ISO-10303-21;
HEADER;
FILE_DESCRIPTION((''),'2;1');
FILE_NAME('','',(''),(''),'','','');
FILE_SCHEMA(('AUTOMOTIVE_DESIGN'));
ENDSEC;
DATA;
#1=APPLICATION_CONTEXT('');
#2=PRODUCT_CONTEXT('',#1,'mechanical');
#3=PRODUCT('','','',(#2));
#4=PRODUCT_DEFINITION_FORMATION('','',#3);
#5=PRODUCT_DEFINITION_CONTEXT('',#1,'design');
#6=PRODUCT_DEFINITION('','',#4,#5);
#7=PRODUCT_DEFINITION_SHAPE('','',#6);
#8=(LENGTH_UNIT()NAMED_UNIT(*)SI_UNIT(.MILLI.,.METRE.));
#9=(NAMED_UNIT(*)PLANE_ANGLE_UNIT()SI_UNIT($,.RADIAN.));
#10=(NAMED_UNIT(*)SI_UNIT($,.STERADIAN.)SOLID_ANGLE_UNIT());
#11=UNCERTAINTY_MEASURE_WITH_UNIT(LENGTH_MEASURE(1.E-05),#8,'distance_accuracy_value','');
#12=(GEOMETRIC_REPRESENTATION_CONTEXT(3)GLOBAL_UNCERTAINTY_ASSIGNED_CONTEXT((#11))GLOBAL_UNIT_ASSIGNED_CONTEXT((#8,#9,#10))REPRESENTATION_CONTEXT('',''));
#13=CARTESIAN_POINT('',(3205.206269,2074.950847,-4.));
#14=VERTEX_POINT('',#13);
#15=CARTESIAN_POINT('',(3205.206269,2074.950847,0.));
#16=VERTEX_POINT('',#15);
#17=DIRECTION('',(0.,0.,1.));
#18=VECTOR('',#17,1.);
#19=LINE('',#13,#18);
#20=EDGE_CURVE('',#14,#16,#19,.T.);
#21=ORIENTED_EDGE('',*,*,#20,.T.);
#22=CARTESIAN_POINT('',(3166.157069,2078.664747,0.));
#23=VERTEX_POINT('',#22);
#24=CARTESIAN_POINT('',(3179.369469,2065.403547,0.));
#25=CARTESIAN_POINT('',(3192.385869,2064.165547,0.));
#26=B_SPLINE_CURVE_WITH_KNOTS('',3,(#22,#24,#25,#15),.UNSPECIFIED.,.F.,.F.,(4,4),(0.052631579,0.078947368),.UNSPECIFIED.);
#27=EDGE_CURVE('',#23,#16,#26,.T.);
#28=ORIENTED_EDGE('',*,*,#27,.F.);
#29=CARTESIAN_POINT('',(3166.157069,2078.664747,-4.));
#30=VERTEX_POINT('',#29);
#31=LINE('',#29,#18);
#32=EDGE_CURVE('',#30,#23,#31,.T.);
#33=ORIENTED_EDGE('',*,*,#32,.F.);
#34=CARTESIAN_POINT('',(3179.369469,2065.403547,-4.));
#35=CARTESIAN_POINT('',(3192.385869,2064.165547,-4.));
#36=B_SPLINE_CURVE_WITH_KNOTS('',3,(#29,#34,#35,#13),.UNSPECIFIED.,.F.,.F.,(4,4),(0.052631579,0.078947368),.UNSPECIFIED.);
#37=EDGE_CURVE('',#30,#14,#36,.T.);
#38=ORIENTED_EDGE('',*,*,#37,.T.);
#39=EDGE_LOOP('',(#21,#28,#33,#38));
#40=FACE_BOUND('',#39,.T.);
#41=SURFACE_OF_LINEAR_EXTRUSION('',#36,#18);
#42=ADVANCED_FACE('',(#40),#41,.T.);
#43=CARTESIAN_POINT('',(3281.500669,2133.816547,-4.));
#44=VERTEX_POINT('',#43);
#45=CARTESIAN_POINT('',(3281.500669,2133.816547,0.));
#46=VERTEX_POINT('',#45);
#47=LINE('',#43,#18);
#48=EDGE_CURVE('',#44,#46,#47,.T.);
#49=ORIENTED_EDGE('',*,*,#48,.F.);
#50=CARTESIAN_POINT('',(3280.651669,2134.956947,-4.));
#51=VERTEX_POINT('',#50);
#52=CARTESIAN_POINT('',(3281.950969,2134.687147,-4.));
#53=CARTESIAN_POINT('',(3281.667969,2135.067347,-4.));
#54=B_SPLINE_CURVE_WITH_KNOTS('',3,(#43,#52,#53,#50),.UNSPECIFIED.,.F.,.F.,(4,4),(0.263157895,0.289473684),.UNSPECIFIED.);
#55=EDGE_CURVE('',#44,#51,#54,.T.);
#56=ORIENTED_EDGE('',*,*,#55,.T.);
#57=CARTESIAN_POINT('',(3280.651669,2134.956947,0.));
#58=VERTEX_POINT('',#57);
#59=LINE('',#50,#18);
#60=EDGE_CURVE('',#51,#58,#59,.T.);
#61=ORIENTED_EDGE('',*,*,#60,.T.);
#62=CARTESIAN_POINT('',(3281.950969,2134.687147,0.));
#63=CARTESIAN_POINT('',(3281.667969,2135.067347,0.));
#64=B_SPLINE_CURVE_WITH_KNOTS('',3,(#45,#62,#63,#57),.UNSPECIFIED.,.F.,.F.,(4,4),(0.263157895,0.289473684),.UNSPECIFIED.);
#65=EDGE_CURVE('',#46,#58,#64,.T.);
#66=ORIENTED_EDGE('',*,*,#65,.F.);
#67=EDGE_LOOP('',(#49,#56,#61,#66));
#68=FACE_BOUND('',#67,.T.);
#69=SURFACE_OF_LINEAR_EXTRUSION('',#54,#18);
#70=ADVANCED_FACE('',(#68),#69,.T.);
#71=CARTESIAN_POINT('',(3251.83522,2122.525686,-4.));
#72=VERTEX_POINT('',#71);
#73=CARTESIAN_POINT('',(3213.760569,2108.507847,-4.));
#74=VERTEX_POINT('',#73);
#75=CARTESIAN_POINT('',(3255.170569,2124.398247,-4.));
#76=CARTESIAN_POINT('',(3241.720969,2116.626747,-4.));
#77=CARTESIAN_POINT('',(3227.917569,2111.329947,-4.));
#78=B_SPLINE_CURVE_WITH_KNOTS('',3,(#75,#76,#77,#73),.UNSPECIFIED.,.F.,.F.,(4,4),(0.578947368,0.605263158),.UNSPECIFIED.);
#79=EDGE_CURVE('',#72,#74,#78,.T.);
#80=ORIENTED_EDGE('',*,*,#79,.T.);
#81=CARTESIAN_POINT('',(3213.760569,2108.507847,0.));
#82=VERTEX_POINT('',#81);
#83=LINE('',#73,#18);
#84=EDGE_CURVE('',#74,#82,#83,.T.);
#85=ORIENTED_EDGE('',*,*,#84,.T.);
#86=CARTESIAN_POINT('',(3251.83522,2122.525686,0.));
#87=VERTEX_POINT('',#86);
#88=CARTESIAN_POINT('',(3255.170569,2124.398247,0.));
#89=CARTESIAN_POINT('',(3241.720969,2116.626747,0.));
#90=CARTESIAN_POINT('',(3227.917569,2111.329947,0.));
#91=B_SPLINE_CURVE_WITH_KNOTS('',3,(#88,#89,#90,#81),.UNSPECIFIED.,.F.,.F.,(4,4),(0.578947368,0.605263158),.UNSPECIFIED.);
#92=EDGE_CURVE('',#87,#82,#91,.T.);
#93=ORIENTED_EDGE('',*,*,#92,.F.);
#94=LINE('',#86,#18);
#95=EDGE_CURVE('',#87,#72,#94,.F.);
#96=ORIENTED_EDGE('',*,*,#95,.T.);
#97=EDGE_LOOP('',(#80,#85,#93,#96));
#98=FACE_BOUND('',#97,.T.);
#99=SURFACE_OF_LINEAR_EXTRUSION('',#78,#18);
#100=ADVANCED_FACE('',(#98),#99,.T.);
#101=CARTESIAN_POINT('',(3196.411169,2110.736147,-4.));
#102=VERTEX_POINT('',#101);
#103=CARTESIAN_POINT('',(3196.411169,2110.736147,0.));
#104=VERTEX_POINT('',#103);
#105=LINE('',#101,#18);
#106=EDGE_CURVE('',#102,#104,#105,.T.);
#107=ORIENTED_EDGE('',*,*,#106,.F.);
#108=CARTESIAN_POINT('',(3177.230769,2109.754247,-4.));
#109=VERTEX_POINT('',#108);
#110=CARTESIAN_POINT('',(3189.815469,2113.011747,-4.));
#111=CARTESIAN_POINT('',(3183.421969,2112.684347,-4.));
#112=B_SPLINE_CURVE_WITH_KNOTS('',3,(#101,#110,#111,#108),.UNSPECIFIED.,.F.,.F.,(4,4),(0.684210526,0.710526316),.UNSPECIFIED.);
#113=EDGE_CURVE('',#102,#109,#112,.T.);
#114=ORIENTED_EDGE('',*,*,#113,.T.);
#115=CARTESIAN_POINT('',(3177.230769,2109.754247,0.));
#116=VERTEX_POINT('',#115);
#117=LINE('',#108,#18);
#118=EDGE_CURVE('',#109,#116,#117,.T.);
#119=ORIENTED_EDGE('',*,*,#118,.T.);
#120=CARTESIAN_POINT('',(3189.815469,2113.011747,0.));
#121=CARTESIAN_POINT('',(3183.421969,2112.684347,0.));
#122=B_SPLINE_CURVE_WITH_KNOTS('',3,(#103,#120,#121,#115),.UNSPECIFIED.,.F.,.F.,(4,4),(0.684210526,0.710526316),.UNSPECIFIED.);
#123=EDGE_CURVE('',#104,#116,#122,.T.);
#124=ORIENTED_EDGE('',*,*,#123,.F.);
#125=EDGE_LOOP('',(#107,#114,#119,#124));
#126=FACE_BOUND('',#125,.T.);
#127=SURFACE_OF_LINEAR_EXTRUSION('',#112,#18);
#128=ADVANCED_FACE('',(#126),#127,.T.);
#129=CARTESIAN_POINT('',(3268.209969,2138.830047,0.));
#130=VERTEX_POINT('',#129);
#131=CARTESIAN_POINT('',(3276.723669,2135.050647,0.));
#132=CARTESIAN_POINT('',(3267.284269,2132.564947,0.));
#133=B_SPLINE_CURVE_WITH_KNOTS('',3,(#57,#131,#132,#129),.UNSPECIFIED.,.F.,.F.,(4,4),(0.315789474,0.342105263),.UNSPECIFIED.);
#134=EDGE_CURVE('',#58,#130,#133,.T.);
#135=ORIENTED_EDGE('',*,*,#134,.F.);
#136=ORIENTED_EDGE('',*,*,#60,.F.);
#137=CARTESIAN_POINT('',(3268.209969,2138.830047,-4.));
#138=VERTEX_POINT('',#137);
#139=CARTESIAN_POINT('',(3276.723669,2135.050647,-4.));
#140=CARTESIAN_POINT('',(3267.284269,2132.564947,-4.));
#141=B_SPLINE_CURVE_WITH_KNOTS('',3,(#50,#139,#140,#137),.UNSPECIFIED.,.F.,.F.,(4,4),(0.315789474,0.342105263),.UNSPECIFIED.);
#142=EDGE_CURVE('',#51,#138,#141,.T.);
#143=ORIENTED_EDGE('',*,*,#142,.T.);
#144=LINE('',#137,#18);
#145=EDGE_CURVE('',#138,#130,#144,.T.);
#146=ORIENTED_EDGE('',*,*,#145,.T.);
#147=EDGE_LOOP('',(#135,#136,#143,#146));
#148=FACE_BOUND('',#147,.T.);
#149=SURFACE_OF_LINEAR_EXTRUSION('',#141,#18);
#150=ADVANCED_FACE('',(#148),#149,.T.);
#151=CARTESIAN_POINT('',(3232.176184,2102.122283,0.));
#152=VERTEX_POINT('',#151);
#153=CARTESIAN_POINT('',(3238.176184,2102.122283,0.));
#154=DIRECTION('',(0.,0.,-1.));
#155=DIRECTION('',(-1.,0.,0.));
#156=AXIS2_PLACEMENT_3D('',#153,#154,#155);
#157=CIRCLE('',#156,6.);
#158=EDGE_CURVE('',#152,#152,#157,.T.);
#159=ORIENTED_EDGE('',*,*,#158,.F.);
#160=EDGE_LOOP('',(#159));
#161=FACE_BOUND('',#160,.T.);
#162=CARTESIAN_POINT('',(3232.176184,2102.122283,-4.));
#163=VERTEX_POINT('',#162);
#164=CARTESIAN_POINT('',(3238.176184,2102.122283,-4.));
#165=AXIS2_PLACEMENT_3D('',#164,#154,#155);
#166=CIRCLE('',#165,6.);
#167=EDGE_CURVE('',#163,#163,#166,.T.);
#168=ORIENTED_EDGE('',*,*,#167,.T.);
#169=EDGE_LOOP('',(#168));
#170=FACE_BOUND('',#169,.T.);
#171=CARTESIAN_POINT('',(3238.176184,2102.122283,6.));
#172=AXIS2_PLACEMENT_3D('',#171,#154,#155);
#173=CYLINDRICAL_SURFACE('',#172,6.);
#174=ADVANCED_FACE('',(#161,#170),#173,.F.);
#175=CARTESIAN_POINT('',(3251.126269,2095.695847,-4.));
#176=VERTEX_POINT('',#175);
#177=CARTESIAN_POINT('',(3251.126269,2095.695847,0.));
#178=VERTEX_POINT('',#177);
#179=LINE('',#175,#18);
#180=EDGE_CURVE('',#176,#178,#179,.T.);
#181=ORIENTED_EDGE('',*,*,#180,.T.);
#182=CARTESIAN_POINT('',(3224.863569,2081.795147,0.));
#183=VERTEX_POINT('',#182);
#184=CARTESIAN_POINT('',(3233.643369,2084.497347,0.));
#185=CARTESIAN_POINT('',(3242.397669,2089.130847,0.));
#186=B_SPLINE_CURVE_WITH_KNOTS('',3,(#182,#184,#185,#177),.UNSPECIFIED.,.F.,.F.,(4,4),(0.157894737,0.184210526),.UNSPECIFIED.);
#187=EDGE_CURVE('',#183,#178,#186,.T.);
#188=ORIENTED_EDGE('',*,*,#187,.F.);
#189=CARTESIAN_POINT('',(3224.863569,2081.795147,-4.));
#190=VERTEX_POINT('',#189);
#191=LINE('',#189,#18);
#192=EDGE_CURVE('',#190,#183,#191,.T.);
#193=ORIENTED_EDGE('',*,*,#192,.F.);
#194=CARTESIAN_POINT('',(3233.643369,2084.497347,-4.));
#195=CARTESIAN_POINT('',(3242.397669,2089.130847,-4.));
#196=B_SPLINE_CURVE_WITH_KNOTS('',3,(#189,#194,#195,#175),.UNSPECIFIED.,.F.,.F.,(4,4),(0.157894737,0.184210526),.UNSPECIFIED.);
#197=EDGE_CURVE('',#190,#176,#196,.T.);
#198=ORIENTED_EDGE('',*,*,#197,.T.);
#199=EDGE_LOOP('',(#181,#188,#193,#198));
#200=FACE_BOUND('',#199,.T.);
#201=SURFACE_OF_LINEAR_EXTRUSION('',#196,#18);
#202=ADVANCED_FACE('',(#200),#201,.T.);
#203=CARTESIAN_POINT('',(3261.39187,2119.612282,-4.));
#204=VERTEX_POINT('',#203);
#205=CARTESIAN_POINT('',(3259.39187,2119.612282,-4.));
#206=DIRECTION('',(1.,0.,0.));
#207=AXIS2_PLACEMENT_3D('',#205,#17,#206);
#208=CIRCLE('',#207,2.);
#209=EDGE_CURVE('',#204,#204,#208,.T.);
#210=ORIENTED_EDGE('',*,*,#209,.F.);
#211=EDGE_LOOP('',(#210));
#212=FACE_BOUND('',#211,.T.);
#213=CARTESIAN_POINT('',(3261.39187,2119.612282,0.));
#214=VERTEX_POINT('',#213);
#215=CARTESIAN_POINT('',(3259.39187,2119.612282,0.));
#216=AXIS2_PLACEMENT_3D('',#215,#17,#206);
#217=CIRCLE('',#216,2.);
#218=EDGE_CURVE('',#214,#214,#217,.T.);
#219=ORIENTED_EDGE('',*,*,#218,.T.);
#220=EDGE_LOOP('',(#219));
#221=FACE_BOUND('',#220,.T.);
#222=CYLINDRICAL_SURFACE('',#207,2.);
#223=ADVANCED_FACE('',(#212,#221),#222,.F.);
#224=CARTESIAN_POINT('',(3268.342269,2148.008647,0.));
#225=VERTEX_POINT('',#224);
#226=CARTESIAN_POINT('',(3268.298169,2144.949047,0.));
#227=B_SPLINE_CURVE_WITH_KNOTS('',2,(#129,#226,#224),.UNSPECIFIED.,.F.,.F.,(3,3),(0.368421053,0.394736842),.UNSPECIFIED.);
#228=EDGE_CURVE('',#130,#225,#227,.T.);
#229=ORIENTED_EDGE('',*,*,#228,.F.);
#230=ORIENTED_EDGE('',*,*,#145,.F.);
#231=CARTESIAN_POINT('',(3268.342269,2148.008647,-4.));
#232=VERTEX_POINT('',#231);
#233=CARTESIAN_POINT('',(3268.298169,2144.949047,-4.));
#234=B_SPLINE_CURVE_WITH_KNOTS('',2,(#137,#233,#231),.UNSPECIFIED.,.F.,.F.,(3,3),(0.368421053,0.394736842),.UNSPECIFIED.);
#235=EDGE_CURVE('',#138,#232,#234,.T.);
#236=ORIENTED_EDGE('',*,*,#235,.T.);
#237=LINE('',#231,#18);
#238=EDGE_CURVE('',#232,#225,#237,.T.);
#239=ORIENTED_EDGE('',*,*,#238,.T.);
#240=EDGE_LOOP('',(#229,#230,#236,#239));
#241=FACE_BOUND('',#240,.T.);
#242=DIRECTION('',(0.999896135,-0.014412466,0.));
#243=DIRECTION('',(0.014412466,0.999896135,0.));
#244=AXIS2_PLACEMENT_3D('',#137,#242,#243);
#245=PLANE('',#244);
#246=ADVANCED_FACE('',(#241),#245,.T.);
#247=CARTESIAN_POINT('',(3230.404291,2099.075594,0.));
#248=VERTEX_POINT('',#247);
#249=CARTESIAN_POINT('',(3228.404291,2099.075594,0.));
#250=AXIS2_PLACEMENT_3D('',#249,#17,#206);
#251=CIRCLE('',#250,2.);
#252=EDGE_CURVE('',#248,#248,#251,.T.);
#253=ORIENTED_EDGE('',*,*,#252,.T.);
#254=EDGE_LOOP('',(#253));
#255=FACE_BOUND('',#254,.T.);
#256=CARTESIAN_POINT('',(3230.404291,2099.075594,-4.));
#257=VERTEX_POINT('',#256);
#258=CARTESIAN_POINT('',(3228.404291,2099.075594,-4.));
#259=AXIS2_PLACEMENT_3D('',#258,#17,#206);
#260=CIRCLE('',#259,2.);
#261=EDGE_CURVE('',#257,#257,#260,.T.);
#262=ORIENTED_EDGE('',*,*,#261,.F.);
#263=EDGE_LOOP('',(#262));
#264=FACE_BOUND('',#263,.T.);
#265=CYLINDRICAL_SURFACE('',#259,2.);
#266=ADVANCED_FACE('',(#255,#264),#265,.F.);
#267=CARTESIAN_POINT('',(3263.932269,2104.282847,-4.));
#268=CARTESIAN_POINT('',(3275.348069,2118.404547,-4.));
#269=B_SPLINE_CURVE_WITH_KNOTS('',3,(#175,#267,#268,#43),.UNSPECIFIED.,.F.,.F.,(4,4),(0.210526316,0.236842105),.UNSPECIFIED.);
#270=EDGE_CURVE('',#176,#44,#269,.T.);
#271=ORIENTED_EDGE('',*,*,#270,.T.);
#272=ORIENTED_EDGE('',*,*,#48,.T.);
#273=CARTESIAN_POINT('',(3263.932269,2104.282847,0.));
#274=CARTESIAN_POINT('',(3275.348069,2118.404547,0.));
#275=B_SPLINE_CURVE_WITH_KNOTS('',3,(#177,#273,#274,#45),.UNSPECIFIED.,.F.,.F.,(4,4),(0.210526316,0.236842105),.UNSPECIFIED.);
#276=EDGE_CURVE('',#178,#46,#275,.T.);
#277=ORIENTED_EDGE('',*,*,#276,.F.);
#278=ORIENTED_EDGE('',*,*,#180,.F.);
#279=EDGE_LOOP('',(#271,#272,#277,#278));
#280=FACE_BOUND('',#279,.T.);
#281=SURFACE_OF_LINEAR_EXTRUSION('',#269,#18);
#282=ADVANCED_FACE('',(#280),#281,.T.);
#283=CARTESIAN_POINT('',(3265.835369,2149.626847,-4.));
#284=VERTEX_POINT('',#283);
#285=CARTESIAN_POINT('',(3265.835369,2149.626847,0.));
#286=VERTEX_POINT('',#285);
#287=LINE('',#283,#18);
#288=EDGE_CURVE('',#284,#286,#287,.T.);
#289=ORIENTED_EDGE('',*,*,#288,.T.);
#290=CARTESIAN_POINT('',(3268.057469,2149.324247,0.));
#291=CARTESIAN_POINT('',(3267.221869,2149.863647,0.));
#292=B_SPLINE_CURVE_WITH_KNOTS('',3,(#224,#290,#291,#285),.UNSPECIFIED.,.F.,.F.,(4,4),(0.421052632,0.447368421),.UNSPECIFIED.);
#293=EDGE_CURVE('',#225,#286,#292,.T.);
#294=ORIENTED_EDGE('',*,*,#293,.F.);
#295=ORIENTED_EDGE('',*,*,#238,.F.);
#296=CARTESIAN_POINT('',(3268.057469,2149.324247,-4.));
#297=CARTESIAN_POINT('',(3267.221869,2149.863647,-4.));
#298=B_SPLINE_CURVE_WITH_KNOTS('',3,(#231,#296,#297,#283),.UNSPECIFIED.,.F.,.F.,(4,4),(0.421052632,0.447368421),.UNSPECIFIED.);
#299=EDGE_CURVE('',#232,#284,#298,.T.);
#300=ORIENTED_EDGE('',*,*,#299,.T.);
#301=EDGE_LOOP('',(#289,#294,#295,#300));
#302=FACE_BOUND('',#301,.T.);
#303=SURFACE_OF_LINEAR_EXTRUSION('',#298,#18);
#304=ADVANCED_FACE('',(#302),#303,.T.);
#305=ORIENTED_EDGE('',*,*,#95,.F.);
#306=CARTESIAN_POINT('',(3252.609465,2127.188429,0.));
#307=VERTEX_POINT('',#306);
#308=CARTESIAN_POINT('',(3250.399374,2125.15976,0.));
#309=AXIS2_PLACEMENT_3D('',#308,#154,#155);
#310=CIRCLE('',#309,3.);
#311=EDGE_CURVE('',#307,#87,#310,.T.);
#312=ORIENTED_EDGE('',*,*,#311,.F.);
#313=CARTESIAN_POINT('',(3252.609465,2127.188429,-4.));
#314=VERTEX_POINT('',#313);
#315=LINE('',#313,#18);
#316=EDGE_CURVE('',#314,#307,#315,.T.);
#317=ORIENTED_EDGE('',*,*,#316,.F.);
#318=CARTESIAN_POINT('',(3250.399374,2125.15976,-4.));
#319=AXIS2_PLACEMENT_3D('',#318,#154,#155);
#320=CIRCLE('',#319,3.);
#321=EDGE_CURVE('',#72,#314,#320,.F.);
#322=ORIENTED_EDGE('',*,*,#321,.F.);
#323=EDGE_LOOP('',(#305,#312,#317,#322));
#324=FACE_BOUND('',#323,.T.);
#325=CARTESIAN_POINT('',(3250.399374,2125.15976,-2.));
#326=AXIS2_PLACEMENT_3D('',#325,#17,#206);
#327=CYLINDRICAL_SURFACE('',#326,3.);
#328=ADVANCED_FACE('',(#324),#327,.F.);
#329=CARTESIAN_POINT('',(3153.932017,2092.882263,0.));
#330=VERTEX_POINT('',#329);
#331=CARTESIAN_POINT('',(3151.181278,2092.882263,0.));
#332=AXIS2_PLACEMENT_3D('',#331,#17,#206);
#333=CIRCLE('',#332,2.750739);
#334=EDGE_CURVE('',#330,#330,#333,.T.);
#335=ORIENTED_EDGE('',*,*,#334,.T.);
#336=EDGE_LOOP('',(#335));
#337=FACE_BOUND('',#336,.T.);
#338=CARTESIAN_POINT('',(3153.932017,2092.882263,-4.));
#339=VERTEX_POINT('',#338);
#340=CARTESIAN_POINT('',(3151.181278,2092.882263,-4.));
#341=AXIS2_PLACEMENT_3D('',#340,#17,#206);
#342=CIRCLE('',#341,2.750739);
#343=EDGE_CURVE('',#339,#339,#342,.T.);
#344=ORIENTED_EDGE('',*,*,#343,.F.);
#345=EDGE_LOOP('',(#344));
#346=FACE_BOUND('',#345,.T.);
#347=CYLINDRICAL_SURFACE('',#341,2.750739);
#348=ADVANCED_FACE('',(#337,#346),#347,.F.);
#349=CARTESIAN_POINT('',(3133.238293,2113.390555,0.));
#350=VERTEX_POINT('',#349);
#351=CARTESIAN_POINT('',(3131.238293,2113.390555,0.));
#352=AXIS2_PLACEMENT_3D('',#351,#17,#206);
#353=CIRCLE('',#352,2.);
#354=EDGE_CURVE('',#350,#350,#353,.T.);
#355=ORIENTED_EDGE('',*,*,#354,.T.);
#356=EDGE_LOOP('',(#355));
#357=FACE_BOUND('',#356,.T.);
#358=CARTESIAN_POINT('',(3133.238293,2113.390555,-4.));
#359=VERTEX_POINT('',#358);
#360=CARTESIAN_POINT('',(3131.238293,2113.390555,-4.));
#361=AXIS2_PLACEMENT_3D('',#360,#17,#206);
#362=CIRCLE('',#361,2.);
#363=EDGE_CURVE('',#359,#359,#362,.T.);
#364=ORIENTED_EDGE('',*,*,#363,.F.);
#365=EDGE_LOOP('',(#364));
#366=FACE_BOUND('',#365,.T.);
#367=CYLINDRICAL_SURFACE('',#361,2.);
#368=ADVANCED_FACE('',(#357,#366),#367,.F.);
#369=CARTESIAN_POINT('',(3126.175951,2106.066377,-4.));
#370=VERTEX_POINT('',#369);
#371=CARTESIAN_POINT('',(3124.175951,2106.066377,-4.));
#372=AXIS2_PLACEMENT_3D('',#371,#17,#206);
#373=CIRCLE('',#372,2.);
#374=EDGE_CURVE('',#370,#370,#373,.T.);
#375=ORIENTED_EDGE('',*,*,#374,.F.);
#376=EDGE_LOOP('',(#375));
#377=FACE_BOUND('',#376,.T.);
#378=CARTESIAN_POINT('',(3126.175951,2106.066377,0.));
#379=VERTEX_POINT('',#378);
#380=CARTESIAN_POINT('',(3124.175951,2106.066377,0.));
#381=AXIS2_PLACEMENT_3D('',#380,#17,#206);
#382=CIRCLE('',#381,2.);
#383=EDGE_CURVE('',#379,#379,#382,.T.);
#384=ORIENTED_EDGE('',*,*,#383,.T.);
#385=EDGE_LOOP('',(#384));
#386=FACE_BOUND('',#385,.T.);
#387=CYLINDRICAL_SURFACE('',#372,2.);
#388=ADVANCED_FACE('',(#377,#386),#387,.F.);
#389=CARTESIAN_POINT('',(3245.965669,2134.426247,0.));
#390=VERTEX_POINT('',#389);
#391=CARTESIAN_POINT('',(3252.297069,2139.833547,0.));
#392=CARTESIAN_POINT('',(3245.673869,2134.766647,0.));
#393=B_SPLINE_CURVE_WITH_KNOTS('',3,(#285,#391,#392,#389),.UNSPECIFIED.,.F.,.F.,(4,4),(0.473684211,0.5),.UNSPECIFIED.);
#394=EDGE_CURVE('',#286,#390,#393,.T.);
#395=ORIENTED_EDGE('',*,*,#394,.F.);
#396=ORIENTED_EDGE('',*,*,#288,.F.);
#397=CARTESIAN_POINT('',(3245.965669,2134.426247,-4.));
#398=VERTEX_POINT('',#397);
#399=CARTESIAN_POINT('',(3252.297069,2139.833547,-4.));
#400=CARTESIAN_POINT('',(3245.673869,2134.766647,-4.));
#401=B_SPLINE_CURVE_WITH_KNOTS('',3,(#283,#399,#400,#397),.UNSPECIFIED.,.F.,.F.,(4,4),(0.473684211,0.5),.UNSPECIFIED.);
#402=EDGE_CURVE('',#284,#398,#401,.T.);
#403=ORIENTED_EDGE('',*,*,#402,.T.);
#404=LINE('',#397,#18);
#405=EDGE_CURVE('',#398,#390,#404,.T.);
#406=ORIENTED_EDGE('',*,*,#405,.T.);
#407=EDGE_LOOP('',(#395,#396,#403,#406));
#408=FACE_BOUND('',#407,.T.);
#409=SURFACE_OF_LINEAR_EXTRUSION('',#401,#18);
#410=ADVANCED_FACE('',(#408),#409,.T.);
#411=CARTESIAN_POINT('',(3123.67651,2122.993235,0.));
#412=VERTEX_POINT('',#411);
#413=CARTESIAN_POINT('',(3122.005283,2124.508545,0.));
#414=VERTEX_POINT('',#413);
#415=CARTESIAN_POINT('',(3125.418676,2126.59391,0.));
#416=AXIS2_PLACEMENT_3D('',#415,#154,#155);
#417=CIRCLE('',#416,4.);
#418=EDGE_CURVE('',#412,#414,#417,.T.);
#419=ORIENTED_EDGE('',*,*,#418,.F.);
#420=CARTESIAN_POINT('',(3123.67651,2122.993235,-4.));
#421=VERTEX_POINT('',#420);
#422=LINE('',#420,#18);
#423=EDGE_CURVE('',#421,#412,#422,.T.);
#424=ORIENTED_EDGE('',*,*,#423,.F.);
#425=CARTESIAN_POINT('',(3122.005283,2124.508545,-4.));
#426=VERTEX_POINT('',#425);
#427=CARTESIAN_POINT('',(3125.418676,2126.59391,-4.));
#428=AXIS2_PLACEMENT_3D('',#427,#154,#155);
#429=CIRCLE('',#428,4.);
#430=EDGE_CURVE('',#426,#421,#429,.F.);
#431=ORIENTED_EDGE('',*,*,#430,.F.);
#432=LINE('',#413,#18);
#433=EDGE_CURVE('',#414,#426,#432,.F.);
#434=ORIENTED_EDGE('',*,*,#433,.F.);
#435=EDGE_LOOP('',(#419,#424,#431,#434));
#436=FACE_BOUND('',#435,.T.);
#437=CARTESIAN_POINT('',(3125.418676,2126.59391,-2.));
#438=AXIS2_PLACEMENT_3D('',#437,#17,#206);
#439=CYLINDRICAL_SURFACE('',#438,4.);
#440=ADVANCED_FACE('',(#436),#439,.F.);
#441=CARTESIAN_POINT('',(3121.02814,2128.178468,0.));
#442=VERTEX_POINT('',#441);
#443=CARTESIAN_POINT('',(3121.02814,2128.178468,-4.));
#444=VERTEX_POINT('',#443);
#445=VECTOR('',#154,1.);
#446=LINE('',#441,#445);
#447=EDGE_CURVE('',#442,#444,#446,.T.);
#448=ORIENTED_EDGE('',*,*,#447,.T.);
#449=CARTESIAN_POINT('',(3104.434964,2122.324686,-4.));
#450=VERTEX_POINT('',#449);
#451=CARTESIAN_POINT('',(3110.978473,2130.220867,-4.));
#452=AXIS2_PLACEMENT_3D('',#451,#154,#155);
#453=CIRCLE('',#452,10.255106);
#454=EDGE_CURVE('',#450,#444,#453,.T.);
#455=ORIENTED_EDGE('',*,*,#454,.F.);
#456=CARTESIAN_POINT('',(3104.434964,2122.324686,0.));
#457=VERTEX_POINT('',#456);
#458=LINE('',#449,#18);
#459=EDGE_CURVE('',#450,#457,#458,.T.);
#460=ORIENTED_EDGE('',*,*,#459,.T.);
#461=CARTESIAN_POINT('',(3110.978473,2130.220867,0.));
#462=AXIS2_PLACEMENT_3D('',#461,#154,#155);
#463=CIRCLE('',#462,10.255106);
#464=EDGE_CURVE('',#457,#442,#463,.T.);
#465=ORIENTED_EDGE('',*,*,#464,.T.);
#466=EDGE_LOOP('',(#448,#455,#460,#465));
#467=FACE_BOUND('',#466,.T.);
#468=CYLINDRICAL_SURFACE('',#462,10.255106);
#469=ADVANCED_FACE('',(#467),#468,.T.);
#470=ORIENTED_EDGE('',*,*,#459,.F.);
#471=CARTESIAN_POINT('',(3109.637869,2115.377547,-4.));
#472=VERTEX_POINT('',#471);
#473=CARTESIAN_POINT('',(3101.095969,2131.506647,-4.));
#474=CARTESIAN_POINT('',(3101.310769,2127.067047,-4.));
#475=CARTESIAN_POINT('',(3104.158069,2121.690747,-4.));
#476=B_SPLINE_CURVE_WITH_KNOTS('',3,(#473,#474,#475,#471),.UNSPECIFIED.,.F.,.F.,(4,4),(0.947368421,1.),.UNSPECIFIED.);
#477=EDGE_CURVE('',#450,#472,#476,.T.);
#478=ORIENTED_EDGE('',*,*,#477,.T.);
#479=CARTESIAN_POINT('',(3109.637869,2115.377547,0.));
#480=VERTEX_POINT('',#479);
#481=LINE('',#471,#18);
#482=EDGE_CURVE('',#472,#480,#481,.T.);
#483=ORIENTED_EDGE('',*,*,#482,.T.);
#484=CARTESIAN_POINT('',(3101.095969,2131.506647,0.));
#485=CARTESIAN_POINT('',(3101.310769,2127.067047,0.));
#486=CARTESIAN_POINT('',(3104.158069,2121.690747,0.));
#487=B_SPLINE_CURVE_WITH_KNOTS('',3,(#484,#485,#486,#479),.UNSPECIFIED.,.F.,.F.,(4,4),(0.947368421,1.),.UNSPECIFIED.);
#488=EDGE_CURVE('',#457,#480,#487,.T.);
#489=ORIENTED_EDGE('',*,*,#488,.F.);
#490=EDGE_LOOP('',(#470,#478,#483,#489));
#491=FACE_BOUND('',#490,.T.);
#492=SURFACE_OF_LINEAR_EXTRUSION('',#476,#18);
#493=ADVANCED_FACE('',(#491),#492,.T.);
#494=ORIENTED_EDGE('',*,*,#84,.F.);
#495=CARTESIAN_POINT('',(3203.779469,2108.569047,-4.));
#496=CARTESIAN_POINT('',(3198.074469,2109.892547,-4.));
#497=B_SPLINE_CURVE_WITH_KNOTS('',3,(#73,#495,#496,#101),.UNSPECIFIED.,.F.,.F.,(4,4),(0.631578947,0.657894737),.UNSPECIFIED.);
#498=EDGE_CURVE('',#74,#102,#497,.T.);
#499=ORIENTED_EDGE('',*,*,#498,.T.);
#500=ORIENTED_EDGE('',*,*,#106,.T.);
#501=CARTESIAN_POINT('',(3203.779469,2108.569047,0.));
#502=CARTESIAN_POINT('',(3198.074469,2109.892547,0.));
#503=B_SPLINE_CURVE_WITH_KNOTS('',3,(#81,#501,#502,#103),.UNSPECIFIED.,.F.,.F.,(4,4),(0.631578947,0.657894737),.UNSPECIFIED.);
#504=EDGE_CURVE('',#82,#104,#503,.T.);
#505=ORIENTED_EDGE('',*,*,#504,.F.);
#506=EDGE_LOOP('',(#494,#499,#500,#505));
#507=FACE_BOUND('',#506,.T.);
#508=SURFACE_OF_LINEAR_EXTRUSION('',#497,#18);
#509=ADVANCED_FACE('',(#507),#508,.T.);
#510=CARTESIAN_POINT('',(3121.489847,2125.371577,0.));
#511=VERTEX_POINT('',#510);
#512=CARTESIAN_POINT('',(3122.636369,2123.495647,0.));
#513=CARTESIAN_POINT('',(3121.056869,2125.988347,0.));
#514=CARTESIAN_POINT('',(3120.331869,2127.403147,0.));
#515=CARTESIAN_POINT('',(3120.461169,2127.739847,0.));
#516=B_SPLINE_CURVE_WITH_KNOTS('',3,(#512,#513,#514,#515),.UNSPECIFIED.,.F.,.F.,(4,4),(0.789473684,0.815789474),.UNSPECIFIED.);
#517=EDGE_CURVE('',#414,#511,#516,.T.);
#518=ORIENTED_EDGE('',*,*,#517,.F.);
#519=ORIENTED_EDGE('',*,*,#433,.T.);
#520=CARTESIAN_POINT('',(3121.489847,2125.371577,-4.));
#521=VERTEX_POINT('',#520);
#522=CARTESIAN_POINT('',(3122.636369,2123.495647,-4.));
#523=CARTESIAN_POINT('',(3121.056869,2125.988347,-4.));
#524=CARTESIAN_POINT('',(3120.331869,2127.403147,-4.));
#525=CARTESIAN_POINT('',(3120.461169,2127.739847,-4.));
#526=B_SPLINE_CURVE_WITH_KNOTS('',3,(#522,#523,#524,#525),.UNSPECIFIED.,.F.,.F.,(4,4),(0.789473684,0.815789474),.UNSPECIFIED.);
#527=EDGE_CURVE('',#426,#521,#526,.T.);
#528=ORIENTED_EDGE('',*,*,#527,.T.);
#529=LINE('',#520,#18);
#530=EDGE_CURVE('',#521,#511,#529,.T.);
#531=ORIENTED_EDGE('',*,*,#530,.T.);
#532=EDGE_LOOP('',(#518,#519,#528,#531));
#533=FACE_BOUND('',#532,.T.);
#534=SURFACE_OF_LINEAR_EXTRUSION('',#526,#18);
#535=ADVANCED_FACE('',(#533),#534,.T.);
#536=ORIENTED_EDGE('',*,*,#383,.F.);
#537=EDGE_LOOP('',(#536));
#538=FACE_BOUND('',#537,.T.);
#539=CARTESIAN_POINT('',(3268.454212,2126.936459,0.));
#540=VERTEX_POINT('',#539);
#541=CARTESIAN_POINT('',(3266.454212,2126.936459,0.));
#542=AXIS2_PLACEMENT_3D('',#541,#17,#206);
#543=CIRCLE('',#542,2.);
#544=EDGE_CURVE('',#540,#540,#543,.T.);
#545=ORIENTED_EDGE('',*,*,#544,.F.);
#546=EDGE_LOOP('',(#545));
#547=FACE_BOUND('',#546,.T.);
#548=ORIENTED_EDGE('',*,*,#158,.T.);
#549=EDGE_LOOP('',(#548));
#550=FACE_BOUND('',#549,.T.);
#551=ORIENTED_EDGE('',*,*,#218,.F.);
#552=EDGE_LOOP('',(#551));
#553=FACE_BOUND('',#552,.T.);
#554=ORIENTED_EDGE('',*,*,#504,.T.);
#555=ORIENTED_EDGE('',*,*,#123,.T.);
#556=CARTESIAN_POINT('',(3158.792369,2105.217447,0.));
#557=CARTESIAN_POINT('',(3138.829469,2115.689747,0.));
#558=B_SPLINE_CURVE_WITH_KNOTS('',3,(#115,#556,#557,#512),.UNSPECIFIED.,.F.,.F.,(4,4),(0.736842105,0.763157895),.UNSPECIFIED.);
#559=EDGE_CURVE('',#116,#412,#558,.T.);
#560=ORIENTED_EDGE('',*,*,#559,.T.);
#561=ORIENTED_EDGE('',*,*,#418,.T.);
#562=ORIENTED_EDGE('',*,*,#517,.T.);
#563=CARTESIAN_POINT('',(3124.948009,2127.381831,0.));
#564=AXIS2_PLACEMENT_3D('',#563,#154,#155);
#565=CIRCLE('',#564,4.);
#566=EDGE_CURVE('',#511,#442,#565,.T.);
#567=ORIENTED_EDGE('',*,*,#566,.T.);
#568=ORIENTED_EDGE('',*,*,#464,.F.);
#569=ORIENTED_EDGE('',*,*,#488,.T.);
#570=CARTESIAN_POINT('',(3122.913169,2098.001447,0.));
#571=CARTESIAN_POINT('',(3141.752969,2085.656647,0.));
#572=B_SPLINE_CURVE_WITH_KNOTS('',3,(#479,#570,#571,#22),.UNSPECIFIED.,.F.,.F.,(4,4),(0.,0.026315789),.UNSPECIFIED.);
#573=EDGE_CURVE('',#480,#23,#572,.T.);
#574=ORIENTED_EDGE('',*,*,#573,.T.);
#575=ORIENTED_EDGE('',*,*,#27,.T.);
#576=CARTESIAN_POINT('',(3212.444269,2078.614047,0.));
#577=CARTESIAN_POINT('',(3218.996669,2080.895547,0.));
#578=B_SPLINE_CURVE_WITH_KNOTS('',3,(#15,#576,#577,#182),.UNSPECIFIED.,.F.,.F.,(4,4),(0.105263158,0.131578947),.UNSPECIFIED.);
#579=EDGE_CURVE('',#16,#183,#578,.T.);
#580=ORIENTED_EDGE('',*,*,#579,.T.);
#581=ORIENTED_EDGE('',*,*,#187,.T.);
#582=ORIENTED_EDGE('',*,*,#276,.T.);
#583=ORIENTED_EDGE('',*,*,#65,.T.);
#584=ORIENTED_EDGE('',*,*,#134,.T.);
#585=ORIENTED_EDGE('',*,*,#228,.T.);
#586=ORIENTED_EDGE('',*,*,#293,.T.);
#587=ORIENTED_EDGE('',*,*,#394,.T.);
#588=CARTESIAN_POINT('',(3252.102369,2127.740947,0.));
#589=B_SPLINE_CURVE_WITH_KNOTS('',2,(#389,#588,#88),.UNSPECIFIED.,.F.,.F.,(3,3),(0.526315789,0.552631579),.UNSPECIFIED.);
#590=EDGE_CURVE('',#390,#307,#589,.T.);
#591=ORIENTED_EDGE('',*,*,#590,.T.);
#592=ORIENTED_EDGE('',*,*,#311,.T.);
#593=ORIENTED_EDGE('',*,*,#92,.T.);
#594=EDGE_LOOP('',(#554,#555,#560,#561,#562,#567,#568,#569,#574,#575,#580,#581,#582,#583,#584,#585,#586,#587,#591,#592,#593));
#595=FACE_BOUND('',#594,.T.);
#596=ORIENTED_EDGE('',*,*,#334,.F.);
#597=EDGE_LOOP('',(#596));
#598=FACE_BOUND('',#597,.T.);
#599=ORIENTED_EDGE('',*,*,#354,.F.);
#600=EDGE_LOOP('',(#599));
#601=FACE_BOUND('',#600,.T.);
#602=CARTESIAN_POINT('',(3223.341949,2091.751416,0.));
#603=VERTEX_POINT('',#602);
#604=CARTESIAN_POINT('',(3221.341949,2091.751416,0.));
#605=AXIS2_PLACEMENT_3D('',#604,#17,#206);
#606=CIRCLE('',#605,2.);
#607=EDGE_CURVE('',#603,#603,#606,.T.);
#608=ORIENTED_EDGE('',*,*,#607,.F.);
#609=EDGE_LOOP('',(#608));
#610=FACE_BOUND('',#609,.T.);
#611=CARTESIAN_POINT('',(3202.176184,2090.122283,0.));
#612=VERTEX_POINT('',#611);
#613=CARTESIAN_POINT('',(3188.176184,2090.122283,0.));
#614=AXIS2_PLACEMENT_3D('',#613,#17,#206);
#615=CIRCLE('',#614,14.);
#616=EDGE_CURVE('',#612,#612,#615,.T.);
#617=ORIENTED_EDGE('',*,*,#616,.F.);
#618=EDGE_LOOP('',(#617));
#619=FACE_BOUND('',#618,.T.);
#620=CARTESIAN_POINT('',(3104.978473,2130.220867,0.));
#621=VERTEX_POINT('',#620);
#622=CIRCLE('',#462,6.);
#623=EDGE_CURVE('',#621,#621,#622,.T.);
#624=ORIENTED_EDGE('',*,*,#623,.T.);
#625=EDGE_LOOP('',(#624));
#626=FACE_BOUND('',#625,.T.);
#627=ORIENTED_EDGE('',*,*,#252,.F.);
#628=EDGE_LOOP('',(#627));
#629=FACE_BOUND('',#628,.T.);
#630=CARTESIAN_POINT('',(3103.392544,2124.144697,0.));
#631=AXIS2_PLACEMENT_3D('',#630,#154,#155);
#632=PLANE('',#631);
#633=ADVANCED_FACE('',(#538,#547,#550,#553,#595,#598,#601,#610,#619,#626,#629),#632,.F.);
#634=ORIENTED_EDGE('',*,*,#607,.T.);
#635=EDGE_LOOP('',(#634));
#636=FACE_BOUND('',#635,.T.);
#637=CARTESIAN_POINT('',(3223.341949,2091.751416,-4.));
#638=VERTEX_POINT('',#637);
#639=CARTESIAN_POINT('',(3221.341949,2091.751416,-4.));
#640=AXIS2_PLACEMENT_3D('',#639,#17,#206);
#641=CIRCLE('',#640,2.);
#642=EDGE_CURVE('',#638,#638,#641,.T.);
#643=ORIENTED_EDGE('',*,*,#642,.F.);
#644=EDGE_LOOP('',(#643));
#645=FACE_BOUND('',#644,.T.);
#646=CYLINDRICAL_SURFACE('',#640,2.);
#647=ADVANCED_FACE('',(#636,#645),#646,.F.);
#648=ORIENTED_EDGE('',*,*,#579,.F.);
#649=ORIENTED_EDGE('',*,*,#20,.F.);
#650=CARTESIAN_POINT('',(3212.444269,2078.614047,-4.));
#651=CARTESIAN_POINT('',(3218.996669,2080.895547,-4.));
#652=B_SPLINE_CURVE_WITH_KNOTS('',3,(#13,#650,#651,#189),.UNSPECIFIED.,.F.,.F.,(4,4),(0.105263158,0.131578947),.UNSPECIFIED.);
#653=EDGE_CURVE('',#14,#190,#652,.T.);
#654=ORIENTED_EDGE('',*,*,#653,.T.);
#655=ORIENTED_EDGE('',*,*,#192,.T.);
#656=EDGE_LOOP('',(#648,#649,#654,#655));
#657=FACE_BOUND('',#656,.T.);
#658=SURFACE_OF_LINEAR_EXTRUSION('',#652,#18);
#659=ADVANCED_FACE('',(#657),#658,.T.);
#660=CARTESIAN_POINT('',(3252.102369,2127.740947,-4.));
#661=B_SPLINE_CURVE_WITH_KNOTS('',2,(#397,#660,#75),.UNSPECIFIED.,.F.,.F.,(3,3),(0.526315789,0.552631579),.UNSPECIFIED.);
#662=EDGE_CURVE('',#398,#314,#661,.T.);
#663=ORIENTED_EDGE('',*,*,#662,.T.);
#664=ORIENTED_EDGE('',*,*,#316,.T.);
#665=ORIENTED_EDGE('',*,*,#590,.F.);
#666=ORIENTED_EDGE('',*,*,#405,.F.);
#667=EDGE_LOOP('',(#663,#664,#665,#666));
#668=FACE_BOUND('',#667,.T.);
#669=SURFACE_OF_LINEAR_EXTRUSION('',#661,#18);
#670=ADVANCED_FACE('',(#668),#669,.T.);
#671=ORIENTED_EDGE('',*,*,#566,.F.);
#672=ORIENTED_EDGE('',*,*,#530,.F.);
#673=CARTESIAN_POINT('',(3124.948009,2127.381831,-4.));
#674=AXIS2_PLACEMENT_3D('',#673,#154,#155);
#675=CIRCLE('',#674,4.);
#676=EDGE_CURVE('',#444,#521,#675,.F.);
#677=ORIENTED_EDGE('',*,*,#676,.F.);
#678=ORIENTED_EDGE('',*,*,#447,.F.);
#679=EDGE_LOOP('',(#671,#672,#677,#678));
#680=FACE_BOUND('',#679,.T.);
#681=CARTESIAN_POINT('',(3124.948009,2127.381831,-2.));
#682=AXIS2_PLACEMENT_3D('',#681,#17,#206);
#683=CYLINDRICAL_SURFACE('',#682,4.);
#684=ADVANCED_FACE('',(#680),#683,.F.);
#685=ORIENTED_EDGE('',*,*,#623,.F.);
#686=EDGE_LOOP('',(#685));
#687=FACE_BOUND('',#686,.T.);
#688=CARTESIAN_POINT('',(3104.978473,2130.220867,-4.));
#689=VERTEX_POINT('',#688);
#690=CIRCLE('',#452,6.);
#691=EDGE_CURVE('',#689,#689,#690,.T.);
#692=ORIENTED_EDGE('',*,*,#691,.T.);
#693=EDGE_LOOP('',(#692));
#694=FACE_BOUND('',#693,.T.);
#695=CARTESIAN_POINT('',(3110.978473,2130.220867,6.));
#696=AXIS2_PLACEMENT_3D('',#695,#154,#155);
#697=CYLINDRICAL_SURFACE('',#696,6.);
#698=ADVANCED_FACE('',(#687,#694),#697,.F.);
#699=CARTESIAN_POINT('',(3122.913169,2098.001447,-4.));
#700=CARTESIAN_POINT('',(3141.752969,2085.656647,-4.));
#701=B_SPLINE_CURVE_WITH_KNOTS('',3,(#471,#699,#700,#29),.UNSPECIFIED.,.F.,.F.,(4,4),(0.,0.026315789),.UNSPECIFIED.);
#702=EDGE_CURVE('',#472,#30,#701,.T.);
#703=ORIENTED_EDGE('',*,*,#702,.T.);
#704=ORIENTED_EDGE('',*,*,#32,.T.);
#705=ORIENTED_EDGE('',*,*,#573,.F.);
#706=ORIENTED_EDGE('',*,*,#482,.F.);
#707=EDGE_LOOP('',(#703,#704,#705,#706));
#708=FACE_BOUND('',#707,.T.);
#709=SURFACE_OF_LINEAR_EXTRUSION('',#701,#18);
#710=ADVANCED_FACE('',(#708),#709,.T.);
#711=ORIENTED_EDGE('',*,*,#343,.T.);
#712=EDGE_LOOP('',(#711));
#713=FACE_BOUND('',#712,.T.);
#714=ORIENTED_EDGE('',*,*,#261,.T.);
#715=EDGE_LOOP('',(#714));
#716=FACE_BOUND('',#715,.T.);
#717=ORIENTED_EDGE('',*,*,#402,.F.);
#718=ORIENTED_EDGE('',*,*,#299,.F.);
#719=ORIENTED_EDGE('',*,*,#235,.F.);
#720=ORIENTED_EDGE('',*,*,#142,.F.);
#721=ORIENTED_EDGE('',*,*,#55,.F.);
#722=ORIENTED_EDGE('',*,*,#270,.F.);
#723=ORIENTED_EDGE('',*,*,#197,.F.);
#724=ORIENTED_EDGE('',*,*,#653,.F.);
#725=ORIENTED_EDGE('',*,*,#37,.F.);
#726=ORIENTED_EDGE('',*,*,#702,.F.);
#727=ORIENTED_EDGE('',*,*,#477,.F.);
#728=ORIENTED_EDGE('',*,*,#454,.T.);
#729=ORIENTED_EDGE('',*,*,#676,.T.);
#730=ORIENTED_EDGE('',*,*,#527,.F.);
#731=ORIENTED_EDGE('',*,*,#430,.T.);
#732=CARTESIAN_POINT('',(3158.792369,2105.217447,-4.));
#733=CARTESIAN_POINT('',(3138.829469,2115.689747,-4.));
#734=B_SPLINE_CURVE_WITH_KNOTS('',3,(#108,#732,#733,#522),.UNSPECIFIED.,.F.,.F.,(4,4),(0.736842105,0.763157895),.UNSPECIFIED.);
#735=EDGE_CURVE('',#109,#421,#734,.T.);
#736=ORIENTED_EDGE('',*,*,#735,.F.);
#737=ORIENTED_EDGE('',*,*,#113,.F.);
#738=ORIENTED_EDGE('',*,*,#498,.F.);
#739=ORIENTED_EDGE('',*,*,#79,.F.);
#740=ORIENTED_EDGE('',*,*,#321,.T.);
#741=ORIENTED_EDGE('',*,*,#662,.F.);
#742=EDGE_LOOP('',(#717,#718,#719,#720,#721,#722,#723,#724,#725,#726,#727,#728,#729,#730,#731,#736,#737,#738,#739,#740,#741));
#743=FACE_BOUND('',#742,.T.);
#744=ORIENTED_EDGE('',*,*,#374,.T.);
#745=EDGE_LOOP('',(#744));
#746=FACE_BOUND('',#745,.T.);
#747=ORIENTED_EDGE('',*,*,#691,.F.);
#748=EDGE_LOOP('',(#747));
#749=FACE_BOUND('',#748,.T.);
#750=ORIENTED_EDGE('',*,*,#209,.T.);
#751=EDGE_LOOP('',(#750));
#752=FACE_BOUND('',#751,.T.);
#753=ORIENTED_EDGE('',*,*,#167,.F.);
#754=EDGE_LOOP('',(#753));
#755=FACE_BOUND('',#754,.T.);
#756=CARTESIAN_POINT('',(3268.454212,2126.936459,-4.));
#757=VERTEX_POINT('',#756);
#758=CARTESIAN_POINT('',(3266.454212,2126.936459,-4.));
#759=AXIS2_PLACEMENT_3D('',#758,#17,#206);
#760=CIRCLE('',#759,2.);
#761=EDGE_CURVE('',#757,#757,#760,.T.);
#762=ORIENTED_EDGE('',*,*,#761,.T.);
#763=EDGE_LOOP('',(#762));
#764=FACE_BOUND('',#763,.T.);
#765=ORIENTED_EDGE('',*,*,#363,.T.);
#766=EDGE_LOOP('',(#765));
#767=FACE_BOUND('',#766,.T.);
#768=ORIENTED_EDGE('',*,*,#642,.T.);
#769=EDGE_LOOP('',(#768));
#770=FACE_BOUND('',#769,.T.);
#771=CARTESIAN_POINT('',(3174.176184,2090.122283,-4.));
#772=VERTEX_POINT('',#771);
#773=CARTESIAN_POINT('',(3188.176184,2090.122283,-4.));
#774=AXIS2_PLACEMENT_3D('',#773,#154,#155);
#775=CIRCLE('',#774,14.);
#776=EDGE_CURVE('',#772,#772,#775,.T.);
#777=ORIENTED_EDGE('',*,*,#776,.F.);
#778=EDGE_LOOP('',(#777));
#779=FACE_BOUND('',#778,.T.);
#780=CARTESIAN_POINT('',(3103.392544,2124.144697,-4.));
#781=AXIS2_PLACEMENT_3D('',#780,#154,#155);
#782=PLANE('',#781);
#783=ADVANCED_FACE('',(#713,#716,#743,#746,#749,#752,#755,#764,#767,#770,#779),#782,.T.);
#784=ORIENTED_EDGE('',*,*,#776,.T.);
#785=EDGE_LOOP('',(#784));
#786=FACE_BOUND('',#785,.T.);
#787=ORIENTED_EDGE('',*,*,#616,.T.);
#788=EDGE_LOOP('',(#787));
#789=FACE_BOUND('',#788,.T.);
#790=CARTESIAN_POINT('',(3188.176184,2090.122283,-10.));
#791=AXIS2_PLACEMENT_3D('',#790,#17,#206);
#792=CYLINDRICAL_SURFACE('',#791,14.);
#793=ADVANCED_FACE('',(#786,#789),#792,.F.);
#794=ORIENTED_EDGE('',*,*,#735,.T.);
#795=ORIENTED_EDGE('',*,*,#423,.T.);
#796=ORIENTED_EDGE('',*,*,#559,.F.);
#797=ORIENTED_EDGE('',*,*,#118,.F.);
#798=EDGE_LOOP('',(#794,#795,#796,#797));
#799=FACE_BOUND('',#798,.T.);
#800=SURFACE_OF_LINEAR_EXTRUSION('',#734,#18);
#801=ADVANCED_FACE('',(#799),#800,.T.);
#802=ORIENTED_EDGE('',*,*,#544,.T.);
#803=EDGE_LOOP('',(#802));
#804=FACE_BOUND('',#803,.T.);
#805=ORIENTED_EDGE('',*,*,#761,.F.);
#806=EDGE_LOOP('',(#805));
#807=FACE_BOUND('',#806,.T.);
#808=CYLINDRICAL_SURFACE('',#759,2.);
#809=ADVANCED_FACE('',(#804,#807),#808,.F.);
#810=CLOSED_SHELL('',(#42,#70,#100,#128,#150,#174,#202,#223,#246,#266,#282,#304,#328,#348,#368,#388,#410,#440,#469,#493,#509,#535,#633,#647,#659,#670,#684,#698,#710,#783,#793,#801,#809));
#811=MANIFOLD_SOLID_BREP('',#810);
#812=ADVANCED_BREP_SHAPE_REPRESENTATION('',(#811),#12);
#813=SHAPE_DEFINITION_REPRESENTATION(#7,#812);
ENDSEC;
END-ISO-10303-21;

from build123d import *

# Parameters (mm, degrees)
MODEL_R               = 4.250003312
MODEL_R_2             = 2.750739051
MODEL_R_3             = 2
TABAN_FLAN_1_DEPTH    = 4
IZIM1_W               = 33.261087109
IZIM1_H               = 28.852991227
SEKME1_DEPTH          = 4
IZIM4_R               = 14
KES_EKSTR_ZYON1_DEPTH = 10
IZIM5_R               = 6
KES_EKSTR_ZYON2_DEPTH = 10
RADYUS1_R             = 3
IZIM6_R               = 10.255106093
IZIM6_R_2             = 3.797139687
SEKME2_DEPTH          = 4
IZIM9_R               = 6
KES_EKSTR_ZYON3_DEPTH = 10
RADYUS2_R             = 4


# Sheet-metal steps are written as plain solids
with BuildPart() as part:
    # Model → Taban-Flanş1 (new body)
    with BuildSketch(Plane.XY):
        with BuildLine():
            add(Edge.make_bspline(
                [(3109.63786856, 2115.37754708), (3122.91316856, 2098.00144708), (3141.75296856, 2085.65664708), (3166.15706856, 2078.66474708)],
                knots=[0, 0, 0, 0, 0.026315789, 0.026315789, 0.026315789, 0.026315789], degree=3))
            add(Edge.make_bspline(
                [(3166.15706856, 2078.66474708), (3179.36946856, 2065.40354708), (3192.38586856, 2064.16554708), (3205.20626856, 2074.95084708)],
                knots=[0.052631579, 0.052631579, 0.052631579, 0.052631579, 0.078947368, 0.078947368, 0.078947368, 0.078947368], degree=3))
            add(Edge.make_bspline(
                [(3205.20626856, 2074.95084708), (3212.44426856, 2078.61404708), (3218.99666856, 2080.89554708), (3224.86356856, 2081.79514708)],
                knots=[0.105263158, 0.105263158, 0.105263158, 0.105263158, 0.131578947, 0.131578947, 0.131578947, 0.131578947], degree=3))
            add(Edge.make_bspline(
                [(3224.86356856, 2081.79514708), (3233.64336856, 2084.49734708), (3242.39766856, 2089.13084708), (3251.12626856, 2095.69584708)],
                knots=[0.157894737, 0.157894737, 0.157894737, 0.157894737, 0.184210526, 0.184210526, 0.184210526, 0.184210526], degree=3))
            add(Edge.make_bspline(
                [(3251.12626856, 2095.69584708), (3263.93226856, 2104.28284708), (3275.34806856, 2118.40454708), (3281.50066856, 2133.81654708)],
                knots=[0.210526316, 0.210526316, 0.210526316, 0.210526316, 0.236842105, 0.236842105, 0.236842105, 0.236842105], degree=3))
            add(Edge.make_bspline(
                [(3281.50066856, 2133.81654708), (3281.95096856, 2134.68714708), (3281.66796856, 2135.06734708), (3280.65166856, 2134.95694708)],
                knots=[0.263157895, 0.263157895, 0.263157895, 0.263157895, 0.289473684, 0.289473684, 0.289473684, 0.289473684], degree=3))
            add(Edge.make_bspline(
                [(3280.65166856, 2134.95694708), (3276.72366856, 2135.05064708), (3267.28426856, 2132.56494708), (3268.20996856, 2138.83004708)],
                knots=[0.315789474, 0.315789474, 0.315789474, 0.315789474, 0.342105263, 0.342105263, 0.342105263, 0.342105263], degree=3))
            add(Edge.make_bspline(
                [(3268.20996856, 2138.83004708), (3268.29816856, 2144.94904708), (3268.34226856, 2148.00864708)],
                knots=[0.368421053, 0.368421053, 0.368421053, 0.394736842, 0.394736842, 0.394736842], degree=2))
            add(Edge.make_bspline(
                [(3268.34226856, 2148.00864708), (3268.05746856, 2149.32424708), (3267.22186856, 2149.86364708), (3265.83536856, 2149.62684708)],
                knots=[0.421052632, 0.421052632, 0.421052632, 0.421052632, 0.447368421, 0.447368421, 0.447368421, 0.447368421], degree=3))
            add(Edge.make_bspline(
                [(3265.83536856, 2149.62684708), (3252.29706856, 2139.83354708), (3245.67386856, 2134.76664708), (3245.96566856, 2134.42624708)],
                knots=[0.473684211, 0.473684211, 0.473684211, 0.473684211, 0.5, 0.5, 0.5, 0.5], degree=3))
            add(Edge.make_bspline(
                [(3245.96566856, 2134.42624708), (3252.10236856, 2127.74094708), (3255.17056856, 2124.39824708)],
                knots=[0.526315789, 0.526315789, 0.526315789, 0.552631579, 0.552631579, 0.552631579], degree=2))
            add(Edge.make_bspline(
                [(3255.17056856, 2124.39824708), (3241.72096856, 2116.62674708), (3227.91756856, 2111.32994708), (3213.76056856, 2108.50784708)],
                knots=[0.578947368, 0.578947368, 0.578947368, 0.578947368, 0.605263158, 0.605263158, 0.605263158, 0.605263158], degree=3))
            add(Edge.make_bspline(
                [(3213.76056856, 2108.50784708), (3203.77946856, 2108.56904708), (3198.07446856, 2109.89254708), (3196.41116856, 2110.73614708)],
                knots=[0.631578947, 0.631578947, 0.631578947, 0.631578947, 0.657894737, 0.657894737, 0.657894737, 0.657894737], degree=3))
            add(Edge.make_bspline(
                [(3196.41116856, 2110.73614708), (3189.81546856, 2113.01174708), (3183.42196856, 2112.68434708), (3177.23076856, 2109.75424708)],
                knots=[0.684210526, 0.684210526, 0.684210526, 0.684210526, 0.710526316, 0.710526316, 0.710526316, 0.710526316], degree=3))
            add(Edge.make_bspline(
                [(3177.23076856, 2109.75424708), (3158.79236856, 2105.21744708), (3138.82946856, 2115.68974708), (3122.63636856, 2123.49564708)],
                knots=[0.736842105, 0.736842105, 0.736842105, 0.736842105, 0.763157895, 0.763157895, 0.763157895, 0.763157895], degree=3))
            add(Edge.make_bspline(
                [(3122.63636856, 2123.49564708), (3121.05686856, 2125.98834708), (3120.33186856, 2127.40314708), (3120.46116856, 2127.73984708)],
                knots=[0.789473684, 0.789473684, 0.789473684, 0.789473684, 0.815789474, 0.815789474, 0.815789474, 0.815789474], degree=3))
            add(Edge.make_bspline(
                [(3120.46116856, 2127.73984708), (3120.65286856, 2134.03014708), (3118.79596856, 2137.76174708), (3114.89056856, 2138.93464708)],
                knots=[0.842105263, 0.842105263, 0.842105263, 0.842105263, 0.868421053, 0.868421053, 0.868421053, 0.868421053], degree=3))
            add(Edge.make_bspline(
                [(3114.89056856, 2138.93464708), (3107.86456856, 2140.79974708), (3103.26626856, 2138.32384708), (3101.09596856, 2131.50664708)],
                knots=[0.894736842, 0.894736842, 0.894736842, 0.894736842, 0.921052632, 0.921052632, 0.921052632, 0.921052632], degree=3))
            add(Edge.make_bspline(
                [(3101.09596856, 2131.50664708), (3101.31076856, 2127.06704708), (3104.15806856, 2121.69074708), (3109.63786856, 2115.37754708)],
                knots=[0.947368421, 0.947368421, 0.947368421, 0.947368421, 1, 1, 1, 1], degree=3))
        make_face()
        with Locations((3110.978473341, 2130.220867466)):
            Circle(MODEL_R, mode=Mode.SUBTRACT)
        with Locations((3151.181278155, 2092.882262914)):
            Circle(MODEL_R_2, mode=Mode.SUBTRACT)
        with Locations((3131.238292653, 2113.390554749)):
            Circle(MODEL_R_3, mode=Mode.SUBTRACT)
        with Locations((3124.175950785, 2106.066377098)):
            Circle(MODEL_R_3, mode=Mode.SUBTRACT)
        with Locations((3266.454212243, 2126.936459372)):
            Circle(MODEL_R_3, mode=Mode.SUBTRACT)
        with Locations((3259.391870375, 2119.612281721)):
            Circle(MODEL_R_3, mode=Mode.SUBTRACT)
        with Locations((3228.404290977, 2099.075593739)):
            Circle(MODEL_R_3, mode=Mode.SUBTRACT)
        with Locations((3221.341949109, 2091.751416088)):
            Circle(MODEL_R_3, mode=Mode.SUBTRACT)
        with BuildLine():
            add(Edge.make_bspline(
                [(3202.10906856, 2089.91944708), (3202.10906856, 2097.65144708), (3195.84106856, 2103.91944708), (3188.10906856, 2103.91944708)],
                knots=[0, 0, 0, 0, 0.2, 0.2, 0.2, 0.2], degree=3))
            add(Edge.make_bspline(
                [(3188.10906856, 2103.91944708), (3180.37706856, 2103.91954708), (3174.10906856, 2097.65154708), (3174.10906856, 2089.91954708)],
                knots=[0.2, 0.2, 0.2, 0.2, 0.4, 0.4, 0.4, 0.4], degree=3))
            add(Edge.make_bspline(
                [(3174.10906856, 2089.91954708), (3174.10906856, 2082.18754708), (3180.37696856, 2075.91954708), (3188.10896856, 2075.91944708)],
                knots=[0.4, 0.4, 0.4, 0.4, 0.6, 0.6, 0.6, 0.6], degree=3))
            add(Edge.make_bspline(
                [(3188.10896856, 2075.91944708), (3195.84096856, 2075.91944708), (3202.10896856, 2082.18744708), (3202.10906856, 2089.91944708)],
                knots=[0.6, 0.6, 0.6, 0.6, 1, 1, 1, 1], degree=3))
        make_face(mode=Mode.SUBTRACT)
    extrude(amount=-TABAN_FLAN_1_DEPTH)

    # Çizim1 → Sekme1 (add)
    with BuildSketch(Plane.XY):
        with Locations((3187.445358668, 2090.033249542)):
            Rectangle(IZIM1_W, IZIM1_H)
    extrude(amount=-SEKME1_DEPTH)

    # Çizim4 → Kes-Ekstrüzyon1 (cut)
    with BuildSketch(Plane.XY):
        with Locations((3188.176183509, 2090.122283307)):
            Circle(IZIM4_R)
    extrude(amount=-KES_EKSTR_ZYON1_DEPTH, mode=Mode.SUBTRACT)

    # Çizim5 → Kes-Ekstrüzyon2 (cut)
    with BuildSketch(Plane(origin=(0, 0, -4), x_dir=(-1, 0, 0), z_dir=(0, 0, -1))):
        with Locations((-3238.176183509, 2102.122283307)):
            Circle(IZIM5_R)
    extrude(amount=-KES_EKSTR_ZYON2_DEPTH, mode=Mode.SUBTRACT)

    # Radyus1
    radyus1_edges = [part.edges().sort_by_distance(p)[0] for p in [
        (3255.17056856, 2124.39824708, -2),
    ]]
    fillet(radyus1_edges, radius=RADYUS1_R)

    # Çizim6 → Sekme2 (add)
    with BuildSketch(Plane(origin=(0, 0, -4), x_dir=(-1, 0, 0), z_dir=(0, 0, -1))):
        with Locations((-3110.978473341, 2130.220867466)):
            Circle(IZIM6_R)
        with Locations((-3110.978473341, 2130.220867466)):
            Circle(IZIM6_R_2, mode=Mode.SUBTRACT)
    extrude(amount=-SEKME2_DEPTH)

    # Çizim9 → Kes-Ekstrüzyon3 (cut)
    with BuildSketch(Plane(origin=(0, 0, -4), x_dir=(-1, 0, 0), z_dir=(0, 0, -1))):
        with Locations((-3110.978473341, 2130.220867466)):
            Circle(IZIM9_R)
    extrude(amount=-KES_EKSTR_ZYON3_DEPTH, mode=Mode.SUBTRACT)

    # Radyus2
    radyus2_edges = [part.edges().sort_by_distance(p)[0] for p in [
        (3122.63636856, 2123.49564708, -2),
        (3120.680098466, 2126.897364658, -2),
    ]]
    fillet(radyus2_edges, radius=RADYUS2_R)


solid = part.part
